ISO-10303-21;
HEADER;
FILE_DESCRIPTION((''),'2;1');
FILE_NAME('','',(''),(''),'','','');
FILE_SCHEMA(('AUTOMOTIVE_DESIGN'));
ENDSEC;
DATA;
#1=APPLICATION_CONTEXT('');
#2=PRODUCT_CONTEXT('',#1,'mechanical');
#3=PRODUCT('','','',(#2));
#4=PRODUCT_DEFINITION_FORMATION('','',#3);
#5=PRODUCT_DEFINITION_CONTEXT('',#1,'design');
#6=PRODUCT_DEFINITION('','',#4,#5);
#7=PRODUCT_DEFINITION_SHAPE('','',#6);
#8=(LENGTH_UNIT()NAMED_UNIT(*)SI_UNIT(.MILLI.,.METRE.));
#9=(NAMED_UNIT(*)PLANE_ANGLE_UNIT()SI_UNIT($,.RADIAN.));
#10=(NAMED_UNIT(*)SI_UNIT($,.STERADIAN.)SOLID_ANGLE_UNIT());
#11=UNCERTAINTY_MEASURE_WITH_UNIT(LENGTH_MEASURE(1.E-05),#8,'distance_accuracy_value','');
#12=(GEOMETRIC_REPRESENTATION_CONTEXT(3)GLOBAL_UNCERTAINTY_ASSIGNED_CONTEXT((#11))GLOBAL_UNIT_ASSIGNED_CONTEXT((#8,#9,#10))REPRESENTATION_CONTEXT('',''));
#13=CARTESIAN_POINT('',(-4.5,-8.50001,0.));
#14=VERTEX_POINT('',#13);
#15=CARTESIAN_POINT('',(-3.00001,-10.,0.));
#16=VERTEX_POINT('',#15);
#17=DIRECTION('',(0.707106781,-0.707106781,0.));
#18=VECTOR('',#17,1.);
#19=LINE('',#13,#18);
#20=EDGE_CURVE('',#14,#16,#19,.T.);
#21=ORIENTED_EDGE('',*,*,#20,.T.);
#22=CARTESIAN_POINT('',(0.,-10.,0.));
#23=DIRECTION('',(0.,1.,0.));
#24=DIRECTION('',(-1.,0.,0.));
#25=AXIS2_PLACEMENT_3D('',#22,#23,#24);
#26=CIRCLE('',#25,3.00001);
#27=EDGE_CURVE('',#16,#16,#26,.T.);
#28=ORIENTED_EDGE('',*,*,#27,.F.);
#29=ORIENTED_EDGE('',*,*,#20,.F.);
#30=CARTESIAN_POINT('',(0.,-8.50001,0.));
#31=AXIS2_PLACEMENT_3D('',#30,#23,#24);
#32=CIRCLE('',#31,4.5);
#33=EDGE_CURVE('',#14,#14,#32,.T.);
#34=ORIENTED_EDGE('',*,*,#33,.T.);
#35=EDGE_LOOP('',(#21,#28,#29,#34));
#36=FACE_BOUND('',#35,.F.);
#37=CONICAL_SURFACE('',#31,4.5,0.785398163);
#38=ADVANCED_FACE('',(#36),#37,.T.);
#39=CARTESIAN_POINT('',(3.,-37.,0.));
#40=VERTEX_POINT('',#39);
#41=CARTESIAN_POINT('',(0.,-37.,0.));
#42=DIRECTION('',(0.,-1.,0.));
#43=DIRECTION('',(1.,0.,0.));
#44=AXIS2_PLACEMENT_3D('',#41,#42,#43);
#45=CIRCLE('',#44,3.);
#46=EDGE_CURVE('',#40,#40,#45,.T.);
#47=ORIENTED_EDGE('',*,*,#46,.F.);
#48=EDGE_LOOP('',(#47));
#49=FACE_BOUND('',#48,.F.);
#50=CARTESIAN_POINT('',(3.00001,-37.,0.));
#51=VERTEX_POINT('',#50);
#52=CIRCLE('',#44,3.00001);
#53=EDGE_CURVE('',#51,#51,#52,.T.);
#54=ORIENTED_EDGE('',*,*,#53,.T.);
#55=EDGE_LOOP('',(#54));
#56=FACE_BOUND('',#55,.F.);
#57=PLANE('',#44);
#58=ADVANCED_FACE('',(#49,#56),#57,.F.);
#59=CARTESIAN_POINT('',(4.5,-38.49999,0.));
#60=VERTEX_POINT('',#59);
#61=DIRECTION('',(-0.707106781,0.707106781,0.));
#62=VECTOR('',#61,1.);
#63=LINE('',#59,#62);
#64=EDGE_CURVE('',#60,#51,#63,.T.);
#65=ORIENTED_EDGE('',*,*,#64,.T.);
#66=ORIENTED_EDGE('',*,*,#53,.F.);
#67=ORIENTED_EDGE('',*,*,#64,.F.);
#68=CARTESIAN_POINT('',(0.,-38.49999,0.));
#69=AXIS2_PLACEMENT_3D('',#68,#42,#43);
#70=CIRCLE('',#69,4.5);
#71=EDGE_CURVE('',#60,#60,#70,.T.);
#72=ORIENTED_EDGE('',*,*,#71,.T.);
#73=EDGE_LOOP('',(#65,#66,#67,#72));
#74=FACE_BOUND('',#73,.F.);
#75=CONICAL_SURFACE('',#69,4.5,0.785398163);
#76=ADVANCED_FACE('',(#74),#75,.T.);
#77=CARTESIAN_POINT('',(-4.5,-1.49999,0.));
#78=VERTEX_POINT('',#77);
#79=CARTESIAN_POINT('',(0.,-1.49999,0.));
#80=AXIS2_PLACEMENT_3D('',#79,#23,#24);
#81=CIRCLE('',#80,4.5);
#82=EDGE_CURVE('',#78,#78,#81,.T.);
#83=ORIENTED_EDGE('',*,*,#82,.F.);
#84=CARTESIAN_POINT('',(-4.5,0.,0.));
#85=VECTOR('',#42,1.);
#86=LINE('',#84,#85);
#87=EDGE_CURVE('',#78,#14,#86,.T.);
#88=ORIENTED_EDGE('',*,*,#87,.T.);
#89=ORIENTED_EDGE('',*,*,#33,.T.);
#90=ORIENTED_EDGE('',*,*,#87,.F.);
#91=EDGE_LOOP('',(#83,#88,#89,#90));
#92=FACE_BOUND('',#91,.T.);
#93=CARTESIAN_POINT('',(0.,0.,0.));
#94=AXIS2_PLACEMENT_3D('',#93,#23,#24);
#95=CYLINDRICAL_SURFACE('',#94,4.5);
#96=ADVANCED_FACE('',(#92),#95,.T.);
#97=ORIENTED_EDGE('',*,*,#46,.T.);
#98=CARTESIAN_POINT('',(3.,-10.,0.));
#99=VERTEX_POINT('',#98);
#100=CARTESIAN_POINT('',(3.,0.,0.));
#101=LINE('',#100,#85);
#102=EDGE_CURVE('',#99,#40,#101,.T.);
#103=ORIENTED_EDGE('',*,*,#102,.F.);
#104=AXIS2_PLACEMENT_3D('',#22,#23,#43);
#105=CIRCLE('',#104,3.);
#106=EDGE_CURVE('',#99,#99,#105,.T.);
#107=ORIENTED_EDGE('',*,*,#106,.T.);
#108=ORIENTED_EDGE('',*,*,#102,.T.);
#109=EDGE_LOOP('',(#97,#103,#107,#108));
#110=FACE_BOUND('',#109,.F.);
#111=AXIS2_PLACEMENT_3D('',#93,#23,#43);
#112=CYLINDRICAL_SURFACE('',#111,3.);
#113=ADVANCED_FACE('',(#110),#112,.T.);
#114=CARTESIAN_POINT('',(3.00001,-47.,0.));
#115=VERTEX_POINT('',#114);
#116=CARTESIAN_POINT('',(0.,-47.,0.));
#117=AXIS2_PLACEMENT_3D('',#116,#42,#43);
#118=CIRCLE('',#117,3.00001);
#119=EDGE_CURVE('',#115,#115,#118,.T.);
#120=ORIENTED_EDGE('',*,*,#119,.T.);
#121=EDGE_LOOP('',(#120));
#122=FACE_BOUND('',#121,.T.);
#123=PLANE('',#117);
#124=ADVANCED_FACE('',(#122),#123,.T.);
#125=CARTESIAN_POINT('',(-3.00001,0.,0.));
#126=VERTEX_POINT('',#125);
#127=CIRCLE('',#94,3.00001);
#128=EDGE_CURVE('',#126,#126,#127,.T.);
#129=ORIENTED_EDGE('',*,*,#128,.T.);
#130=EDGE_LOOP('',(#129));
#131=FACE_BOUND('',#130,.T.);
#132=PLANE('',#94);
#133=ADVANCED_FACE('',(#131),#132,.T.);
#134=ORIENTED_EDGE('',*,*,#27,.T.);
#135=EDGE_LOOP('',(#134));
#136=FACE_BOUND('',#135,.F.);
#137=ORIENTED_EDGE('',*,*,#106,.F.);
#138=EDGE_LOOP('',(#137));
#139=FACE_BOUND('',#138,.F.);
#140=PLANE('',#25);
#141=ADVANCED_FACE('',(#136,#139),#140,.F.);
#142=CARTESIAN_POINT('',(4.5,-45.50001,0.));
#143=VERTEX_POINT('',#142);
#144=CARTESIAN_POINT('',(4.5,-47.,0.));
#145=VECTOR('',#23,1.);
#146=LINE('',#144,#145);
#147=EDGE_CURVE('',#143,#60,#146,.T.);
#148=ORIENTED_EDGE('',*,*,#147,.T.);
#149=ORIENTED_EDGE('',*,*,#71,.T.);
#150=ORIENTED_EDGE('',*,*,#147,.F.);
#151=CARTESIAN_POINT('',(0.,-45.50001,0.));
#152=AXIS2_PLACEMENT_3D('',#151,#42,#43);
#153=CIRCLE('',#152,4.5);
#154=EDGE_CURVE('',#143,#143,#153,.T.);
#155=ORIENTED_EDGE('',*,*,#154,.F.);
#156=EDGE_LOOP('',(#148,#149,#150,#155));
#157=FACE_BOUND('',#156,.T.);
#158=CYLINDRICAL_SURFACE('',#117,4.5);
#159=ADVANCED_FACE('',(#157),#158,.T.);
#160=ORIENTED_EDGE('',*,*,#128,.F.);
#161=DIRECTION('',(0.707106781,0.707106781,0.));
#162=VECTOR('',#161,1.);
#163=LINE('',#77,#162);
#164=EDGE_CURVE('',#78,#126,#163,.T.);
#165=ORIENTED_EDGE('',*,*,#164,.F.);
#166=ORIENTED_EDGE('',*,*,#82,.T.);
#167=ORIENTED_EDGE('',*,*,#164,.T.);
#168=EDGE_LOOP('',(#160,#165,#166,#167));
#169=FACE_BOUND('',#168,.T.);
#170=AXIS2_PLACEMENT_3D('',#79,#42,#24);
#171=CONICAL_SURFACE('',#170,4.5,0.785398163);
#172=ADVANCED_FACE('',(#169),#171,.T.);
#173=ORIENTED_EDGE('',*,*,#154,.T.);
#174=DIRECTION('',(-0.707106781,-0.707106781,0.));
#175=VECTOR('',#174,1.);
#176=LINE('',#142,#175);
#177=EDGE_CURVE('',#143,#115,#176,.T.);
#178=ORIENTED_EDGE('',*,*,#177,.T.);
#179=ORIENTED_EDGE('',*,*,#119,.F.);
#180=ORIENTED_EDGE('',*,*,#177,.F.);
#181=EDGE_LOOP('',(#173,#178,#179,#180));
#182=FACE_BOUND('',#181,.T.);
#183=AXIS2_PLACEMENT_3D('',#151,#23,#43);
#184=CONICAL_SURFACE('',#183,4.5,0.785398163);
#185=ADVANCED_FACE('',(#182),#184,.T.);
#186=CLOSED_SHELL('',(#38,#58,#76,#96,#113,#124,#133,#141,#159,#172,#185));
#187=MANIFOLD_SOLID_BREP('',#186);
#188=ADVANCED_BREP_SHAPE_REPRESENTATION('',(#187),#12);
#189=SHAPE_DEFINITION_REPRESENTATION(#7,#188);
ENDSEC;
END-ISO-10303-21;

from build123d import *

# Parameters (mm, degrees)
F0_R     = 3
F1_DEPTH = 47
F2_R     = 4.5
F2_R_2   = 3
F3_DEPTH = 10
F4_SIZE  = 1.49999
F5_R     = 4.5
F6_DEPTH = 10
F7_SIZE  = 1.49999


# Not quite as in the source:
# - a fillet or chamfer is up to 0.001 mm smaller than in the source, because OpenCascade refuses the exact size


with BuildPart() as f1:
    # F0 (on Front) → F1 (new body)
    with BuildSketch(Plane.XZ):
        Circle(F0_R)
    extrude(amount=F1_DEPTH)

    # F2 (on face) → F3 (join)
    with BuildSketch(Plane.XZ.offset(47)):
        Circle(F2_R)
        Circle(F2_R_2, mode=Mode.SUBTRACT)
    extrude(amount=-F3_DEPTH)

    # F4 (size 1.5 in the source; OpenCascade refuses exactly that, so slightly less here)
    f4_edges = [f1.edges().sort_by_distance(p)[0] for p in [
        (-4.5, -37, 0),
        (-4.5, -47, 0),
    ]]
    chamfer(f4_edges, length=F4_SIZE)

    # F5 (on face) → F6 (join)
    with BuildSketch(Plane(origin=(0, 0, 0), x_dir=(-1, 0, 0), z_dir=(0, 1, 0))):
        Circle(F5_R)
    extrude(amount=-F6_DEPTH)

    # F7 (size 1.5 in the source; OpenCascade refuses exactly that, so slightly less here)
    f7_edges = [f1.edges().sort_by_distance(p)[0] for p in [
        (4.5, -10, 0),
        (4.5, 0, 0),
    ]]
    chamfer(f7_edges, length=F7_SIZE)


solid = f1.part
